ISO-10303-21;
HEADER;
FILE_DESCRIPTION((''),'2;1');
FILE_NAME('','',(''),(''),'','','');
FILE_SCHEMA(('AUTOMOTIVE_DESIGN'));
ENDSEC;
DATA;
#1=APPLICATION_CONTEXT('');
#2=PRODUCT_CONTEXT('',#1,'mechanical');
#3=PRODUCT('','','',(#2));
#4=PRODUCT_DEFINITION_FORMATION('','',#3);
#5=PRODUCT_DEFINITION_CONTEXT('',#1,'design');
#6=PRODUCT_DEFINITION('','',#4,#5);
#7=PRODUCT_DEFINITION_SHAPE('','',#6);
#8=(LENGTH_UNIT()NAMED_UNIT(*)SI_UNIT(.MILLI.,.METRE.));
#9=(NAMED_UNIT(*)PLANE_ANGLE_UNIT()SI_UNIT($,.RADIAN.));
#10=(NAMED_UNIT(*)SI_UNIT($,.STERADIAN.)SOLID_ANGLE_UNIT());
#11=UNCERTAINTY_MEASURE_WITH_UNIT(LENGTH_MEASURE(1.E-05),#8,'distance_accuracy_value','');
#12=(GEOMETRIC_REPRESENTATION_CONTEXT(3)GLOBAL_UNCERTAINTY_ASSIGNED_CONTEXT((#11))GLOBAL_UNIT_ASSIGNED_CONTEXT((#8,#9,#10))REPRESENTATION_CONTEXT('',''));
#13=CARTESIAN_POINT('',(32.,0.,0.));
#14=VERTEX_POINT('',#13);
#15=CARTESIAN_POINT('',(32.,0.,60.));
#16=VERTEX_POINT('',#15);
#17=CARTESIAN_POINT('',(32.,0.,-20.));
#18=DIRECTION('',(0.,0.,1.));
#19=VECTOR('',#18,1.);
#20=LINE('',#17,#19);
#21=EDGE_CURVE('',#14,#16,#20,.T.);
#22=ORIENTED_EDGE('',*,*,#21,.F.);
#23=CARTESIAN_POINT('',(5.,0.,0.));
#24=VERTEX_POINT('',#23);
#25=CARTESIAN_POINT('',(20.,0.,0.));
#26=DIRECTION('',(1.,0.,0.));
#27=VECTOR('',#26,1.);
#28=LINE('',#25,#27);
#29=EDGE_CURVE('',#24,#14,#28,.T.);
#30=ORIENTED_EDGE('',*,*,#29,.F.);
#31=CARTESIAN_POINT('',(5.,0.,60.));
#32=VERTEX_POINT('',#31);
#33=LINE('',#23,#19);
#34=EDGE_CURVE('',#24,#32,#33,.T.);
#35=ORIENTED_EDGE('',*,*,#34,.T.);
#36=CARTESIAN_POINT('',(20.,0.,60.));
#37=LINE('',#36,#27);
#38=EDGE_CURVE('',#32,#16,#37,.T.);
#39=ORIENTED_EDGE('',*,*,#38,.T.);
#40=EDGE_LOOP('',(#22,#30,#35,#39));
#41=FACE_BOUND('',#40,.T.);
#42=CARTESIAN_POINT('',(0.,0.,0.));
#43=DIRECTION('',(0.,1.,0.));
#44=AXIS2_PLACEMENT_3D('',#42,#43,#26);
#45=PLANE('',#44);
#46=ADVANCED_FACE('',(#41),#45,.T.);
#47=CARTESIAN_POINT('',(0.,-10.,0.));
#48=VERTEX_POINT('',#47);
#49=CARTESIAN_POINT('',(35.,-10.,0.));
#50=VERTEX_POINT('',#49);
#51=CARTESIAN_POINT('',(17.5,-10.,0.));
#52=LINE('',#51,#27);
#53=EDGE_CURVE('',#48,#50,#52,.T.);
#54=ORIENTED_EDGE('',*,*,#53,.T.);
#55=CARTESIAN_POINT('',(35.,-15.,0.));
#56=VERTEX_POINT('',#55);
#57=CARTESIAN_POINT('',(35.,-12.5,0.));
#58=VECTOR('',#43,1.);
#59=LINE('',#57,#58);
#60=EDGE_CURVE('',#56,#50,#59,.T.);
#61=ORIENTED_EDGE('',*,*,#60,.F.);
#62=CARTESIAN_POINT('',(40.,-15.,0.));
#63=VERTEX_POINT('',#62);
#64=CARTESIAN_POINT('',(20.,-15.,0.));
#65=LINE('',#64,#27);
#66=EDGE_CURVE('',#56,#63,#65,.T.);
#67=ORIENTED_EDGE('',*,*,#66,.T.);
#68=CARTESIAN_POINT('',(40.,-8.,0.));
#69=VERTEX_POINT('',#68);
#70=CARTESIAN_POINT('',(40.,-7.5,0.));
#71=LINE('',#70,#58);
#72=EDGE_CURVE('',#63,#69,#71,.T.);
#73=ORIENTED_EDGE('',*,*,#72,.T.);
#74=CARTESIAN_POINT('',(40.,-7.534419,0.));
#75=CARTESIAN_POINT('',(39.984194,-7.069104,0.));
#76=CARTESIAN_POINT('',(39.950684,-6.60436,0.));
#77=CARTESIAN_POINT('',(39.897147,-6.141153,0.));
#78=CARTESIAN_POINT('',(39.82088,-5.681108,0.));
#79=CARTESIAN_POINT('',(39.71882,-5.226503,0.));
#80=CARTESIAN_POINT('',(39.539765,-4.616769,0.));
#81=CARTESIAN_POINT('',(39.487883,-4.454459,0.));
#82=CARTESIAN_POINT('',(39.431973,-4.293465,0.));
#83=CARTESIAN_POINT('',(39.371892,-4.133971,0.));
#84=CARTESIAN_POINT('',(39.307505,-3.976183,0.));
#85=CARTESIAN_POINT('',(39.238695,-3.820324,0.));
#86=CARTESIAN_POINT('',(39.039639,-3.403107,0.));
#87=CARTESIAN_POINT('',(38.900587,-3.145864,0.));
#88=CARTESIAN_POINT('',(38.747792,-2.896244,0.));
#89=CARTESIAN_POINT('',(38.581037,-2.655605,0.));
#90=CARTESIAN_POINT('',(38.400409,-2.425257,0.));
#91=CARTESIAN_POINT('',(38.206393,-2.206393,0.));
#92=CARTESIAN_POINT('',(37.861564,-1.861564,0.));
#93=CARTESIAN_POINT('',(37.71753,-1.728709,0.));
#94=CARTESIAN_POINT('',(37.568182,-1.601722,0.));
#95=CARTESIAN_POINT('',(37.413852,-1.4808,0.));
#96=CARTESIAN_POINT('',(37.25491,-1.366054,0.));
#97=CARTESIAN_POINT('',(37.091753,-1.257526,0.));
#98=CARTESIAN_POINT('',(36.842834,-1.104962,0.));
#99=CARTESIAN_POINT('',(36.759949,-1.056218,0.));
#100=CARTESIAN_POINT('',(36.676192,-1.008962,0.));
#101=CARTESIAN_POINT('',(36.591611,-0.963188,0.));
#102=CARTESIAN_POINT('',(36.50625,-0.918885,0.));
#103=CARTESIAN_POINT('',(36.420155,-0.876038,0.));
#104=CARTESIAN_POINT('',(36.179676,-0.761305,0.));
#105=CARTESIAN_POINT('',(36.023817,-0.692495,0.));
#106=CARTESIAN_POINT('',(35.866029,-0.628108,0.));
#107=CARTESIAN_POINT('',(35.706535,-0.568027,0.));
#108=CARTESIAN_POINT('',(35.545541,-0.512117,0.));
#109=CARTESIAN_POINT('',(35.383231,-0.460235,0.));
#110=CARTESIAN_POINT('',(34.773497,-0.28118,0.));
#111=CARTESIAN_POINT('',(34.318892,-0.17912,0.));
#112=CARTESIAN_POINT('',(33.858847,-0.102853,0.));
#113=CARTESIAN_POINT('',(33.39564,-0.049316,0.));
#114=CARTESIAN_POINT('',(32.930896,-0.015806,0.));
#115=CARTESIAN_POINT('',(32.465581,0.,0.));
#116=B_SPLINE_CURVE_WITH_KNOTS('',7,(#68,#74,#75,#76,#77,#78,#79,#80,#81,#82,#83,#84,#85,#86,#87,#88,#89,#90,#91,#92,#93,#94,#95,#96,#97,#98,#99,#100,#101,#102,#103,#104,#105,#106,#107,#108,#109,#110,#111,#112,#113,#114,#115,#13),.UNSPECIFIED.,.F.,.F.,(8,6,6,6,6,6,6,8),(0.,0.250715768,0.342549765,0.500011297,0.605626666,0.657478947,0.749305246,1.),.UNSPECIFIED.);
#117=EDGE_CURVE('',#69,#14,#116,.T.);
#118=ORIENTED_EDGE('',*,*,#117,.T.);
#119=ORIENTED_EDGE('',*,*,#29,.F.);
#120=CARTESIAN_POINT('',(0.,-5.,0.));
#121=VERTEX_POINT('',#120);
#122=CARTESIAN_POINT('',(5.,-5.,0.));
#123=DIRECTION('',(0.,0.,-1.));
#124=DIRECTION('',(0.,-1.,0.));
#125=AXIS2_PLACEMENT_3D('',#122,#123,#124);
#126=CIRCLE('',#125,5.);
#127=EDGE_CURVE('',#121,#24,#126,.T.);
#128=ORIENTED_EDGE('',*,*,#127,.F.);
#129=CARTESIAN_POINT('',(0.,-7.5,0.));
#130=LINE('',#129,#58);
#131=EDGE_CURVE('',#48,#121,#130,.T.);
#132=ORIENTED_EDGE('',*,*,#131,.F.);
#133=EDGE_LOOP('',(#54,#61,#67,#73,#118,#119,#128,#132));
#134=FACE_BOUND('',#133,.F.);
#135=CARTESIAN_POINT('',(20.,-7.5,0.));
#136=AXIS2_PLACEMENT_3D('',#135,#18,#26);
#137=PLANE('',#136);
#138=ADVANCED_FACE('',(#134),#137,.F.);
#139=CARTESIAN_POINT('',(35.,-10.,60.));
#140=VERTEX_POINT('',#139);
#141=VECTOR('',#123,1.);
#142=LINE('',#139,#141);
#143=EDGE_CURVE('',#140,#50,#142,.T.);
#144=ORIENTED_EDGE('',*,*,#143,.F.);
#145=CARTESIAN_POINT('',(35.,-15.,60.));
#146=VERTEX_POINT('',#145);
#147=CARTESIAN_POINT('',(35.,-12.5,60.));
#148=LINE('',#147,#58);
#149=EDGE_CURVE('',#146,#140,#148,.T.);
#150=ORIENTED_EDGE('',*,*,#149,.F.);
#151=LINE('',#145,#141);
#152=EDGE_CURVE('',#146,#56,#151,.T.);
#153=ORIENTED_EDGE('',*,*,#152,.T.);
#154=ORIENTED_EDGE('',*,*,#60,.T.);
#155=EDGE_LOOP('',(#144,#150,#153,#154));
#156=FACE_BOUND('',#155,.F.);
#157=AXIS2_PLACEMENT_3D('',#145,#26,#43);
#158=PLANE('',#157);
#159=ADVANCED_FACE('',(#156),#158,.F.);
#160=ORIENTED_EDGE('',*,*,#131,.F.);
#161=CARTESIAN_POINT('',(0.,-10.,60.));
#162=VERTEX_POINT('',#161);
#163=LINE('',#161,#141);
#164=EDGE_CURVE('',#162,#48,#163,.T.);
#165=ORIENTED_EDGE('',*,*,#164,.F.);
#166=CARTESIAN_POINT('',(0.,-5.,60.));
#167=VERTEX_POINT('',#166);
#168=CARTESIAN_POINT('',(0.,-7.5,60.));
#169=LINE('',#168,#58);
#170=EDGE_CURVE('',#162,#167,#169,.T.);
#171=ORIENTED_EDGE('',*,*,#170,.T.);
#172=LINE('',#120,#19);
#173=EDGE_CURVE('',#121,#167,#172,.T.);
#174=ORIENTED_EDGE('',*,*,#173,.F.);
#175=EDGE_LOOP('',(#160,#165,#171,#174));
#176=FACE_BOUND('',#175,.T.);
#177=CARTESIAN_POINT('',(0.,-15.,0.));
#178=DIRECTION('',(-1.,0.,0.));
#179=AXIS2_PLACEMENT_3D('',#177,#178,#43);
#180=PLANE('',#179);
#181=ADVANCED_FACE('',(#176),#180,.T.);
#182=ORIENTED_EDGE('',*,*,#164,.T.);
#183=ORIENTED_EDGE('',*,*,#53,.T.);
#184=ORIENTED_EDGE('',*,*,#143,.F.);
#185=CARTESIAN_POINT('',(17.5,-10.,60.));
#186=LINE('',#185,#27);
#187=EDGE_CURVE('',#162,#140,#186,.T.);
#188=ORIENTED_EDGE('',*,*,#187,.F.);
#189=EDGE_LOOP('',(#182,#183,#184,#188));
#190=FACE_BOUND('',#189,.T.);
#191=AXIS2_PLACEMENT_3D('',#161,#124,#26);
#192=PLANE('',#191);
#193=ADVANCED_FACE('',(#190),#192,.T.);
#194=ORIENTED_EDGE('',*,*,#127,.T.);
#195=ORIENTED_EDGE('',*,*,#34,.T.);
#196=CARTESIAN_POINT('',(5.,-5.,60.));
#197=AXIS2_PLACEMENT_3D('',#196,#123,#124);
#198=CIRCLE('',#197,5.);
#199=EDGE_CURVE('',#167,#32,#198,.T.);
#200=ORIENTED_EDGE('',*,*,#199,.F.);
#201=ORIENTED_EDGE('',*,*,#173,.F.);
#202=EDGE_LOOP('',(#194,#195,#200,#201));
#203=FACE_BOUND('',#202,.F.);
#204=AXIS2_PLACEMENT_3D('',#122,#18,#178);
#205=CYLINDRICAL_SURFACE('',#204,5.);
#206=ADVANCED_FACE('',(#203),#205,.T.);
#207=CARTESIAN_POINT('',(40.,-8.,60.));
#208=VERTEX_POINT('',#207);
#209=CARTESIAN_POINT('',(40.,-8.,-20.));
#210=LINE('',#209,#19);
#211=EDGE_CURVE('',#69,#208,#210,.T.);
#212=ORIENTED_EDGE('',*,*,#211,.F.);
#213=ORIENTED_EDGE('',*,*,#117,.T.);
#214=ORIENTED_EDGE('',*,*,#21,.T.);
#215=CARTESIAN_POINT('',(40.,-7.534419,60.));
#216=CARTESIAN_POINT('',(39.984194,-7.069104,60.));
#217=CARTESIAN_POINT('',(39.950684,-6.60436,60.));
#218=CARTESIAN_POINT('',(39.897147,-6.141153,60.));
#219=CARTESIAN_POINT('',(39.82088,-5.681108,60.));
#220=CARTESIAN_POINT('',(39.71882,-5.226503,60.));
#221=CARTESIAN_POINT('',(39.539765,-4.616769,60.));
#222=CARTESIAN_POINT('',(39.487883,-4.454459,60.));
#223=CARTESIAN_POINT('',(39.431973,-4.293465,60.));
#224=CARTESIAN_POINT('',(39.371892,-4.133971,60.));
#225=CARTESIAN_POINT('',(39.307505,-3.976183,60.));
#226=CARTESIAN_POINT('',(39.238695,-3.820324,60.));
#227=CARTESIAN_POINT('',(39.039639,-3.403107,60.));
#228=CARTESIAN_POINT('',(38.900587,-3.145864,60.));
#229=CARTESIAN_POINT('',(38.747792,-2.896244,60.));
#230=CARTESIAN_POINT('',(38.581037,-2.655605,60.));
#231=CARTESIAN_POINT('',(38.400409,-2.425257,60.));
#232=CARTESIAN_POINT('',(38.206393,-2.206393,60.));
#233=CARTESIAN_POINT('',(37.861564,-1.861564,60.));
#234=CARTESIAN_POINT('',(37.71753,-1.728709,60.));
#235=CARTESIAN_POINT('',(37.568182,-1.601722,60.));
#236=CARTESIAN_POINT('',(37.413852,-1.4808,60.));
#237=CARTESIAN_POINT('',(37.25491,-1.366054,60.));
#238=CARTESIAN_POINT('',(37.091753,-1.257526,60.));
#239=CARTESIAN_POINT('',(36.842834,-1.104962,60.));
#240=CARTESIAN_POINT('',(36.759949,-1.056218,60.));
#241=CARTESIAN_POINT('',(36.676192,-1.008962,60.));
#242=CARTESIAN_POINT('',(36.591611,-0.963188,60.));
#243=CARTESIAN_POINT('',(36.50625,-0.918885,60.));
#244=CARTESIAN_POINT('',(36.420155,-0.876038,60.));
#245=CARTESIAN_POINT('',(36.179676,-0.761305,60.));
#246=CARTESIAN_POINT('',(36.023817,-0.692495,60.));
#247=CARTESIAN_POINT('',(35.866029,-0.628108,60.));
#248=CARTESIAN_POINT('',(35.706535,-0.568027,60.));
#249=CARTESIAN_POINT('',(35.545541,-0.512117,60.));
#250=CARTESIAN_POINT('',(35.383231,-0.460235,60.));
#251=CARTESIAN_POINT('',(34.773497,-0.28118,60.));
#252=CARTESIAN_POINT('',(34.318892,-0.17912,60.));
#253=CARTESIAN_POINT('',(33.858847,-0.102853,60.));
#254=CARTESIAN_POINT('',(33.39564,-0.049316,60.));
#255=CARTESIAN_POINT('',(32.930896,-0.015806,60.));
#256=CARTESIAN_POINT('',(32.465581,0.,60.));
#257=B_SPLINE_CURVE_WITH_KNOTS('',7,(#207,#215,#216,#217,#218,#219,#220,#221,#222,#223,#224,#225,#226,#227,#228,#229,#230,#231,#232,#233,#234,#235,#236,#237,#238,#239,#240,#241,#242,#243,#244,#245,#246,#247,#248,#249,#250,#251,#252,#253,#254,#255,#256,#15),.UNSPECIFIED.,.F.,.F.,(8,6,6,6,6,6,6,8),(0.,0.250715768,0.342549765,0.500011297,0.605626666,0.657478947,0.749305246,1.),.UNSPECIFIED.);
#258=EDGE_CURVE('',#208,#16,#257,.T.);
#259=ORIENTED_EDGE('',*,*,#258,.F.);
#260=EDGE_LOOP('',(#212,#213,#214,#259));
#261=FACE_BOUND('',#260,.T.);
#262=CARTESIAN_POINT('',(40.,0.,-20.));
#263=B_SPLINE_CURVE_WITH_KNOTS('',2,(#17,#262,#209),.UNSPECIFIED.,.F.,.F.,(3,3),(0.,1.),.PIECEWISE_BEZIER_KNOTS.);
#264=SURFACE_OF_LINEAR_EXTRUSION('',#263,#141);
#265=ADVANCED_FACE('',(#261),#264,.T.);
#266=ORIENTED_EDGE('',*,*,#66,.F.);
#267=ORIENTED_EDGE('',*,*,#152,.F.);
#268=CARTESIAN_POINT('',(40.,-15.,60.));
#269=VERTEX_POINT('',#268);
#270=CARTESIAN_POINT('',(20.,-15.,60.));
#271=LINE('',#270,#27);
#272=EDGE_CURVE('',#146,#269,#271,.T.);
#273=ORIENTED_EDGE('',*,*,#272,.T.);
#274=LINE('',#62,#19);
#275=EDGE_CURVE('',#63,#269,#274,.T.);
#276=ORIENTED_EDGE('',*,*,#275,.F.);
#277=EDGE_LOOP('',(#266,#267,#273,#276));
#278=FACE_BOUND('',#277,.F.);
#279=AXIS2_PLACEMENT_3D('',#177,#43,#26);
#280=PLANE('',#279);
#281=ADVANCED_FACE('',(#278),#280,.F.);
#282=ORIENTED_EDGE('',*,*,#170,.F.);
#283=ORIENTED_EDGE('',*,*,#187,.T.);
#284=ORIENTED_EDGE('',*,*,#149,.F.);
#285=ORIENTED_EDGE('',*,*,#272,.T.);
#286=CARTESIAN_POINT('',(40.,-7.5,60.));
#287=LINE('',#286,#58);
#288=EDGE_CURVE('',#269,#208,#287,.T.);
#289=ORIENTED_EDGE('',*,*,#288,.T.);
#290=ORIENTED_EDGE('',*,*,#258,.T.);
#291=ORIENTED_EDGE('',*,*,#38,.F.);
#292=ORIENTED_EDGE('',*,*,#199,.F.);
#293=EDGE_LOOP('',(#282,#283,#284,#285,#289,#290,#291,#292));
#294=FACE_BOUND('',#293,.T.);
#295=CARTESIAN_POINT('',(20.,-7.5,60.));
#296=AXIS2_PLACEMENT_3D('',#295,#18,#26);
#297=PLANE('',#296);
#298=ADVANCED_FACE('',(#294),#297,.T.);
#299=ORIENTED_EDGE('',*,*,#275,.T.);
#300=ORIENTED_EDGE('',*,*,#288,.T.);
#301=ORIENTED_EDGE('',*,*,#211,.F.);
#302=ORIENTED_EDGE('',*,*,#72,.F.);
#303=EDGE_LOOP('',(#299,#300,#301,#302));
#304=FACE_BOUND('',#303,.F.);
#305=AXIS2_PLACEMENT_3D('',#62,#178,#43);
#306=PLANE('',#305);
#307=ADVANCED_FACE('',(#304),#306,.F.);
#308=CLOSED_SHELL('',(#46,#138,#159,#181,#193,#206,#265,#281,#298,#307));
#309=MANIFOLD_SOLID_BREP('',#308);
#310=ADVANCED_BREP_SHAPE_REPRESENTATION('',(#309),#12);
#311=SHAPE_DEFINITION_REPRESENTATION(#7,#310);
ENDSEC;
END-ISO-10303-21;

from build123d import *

# Parameters (mm, degrees)
F0_W        = 40
F0_H        = 15
F1_DEPTH    = 60
F2_W        = 35
F2_H        = 5
F3_DEPTH    = 60
F4_T1_DEPTH = 100
F5_R        = 5


# Not quite as in the source:
# - a fillet or chamfer that OpenCascade refuses, or shapes differently, is made with other operations: its cross-section is extruded or revolved along the edge and cut away or added


with BuildPart() as f1:
    # F0 (on Top) → F1 (new body)
    with BuildSketch(Plane.XY):
        with Locations((20, -7.5)):
            Rectangle(F0_W, F0_H)
    extrude(amount=F1_DEPTH)

    # F2 (on face) → F3 (cut, through all)
    with BuildSketch(Plane.XY.offset(60)):
        with Locations((17.5, -12.5)):
            Rectangle(F2_W, F2_H)
    extrude(amount=-F3_DEPTH, mode=Mode.SUBTRACT)

    # F4: fillet of radius 8 on 1 edges, made by hand

    # F4_s2 → F4_t1 (cut)
    with BuildSketch(Plane.XY.offset(-20)):
        with BuildLine():
            add(Edge.make_bspline(
                [(32, 0), (40, 0), (40, -8)],
                knots=[0, 0, 0, 1, 1, 1], degree=2, weights=[1, 1, 1]))
            Line((40, -8), (40, 0))
            Line((40, 0), (32, 0))
        make_face()
    extrude(amount=F4_T1_DEPTH, mode=Mode.SUBTRACT)

    # F5
    f5_edges = [f1.edges().sort_by_distance(p)[0] for p in [
        (0, 0, 30),
    ]]
    fillet(f5_edges, radius=F5_R)


solid = f1.part
